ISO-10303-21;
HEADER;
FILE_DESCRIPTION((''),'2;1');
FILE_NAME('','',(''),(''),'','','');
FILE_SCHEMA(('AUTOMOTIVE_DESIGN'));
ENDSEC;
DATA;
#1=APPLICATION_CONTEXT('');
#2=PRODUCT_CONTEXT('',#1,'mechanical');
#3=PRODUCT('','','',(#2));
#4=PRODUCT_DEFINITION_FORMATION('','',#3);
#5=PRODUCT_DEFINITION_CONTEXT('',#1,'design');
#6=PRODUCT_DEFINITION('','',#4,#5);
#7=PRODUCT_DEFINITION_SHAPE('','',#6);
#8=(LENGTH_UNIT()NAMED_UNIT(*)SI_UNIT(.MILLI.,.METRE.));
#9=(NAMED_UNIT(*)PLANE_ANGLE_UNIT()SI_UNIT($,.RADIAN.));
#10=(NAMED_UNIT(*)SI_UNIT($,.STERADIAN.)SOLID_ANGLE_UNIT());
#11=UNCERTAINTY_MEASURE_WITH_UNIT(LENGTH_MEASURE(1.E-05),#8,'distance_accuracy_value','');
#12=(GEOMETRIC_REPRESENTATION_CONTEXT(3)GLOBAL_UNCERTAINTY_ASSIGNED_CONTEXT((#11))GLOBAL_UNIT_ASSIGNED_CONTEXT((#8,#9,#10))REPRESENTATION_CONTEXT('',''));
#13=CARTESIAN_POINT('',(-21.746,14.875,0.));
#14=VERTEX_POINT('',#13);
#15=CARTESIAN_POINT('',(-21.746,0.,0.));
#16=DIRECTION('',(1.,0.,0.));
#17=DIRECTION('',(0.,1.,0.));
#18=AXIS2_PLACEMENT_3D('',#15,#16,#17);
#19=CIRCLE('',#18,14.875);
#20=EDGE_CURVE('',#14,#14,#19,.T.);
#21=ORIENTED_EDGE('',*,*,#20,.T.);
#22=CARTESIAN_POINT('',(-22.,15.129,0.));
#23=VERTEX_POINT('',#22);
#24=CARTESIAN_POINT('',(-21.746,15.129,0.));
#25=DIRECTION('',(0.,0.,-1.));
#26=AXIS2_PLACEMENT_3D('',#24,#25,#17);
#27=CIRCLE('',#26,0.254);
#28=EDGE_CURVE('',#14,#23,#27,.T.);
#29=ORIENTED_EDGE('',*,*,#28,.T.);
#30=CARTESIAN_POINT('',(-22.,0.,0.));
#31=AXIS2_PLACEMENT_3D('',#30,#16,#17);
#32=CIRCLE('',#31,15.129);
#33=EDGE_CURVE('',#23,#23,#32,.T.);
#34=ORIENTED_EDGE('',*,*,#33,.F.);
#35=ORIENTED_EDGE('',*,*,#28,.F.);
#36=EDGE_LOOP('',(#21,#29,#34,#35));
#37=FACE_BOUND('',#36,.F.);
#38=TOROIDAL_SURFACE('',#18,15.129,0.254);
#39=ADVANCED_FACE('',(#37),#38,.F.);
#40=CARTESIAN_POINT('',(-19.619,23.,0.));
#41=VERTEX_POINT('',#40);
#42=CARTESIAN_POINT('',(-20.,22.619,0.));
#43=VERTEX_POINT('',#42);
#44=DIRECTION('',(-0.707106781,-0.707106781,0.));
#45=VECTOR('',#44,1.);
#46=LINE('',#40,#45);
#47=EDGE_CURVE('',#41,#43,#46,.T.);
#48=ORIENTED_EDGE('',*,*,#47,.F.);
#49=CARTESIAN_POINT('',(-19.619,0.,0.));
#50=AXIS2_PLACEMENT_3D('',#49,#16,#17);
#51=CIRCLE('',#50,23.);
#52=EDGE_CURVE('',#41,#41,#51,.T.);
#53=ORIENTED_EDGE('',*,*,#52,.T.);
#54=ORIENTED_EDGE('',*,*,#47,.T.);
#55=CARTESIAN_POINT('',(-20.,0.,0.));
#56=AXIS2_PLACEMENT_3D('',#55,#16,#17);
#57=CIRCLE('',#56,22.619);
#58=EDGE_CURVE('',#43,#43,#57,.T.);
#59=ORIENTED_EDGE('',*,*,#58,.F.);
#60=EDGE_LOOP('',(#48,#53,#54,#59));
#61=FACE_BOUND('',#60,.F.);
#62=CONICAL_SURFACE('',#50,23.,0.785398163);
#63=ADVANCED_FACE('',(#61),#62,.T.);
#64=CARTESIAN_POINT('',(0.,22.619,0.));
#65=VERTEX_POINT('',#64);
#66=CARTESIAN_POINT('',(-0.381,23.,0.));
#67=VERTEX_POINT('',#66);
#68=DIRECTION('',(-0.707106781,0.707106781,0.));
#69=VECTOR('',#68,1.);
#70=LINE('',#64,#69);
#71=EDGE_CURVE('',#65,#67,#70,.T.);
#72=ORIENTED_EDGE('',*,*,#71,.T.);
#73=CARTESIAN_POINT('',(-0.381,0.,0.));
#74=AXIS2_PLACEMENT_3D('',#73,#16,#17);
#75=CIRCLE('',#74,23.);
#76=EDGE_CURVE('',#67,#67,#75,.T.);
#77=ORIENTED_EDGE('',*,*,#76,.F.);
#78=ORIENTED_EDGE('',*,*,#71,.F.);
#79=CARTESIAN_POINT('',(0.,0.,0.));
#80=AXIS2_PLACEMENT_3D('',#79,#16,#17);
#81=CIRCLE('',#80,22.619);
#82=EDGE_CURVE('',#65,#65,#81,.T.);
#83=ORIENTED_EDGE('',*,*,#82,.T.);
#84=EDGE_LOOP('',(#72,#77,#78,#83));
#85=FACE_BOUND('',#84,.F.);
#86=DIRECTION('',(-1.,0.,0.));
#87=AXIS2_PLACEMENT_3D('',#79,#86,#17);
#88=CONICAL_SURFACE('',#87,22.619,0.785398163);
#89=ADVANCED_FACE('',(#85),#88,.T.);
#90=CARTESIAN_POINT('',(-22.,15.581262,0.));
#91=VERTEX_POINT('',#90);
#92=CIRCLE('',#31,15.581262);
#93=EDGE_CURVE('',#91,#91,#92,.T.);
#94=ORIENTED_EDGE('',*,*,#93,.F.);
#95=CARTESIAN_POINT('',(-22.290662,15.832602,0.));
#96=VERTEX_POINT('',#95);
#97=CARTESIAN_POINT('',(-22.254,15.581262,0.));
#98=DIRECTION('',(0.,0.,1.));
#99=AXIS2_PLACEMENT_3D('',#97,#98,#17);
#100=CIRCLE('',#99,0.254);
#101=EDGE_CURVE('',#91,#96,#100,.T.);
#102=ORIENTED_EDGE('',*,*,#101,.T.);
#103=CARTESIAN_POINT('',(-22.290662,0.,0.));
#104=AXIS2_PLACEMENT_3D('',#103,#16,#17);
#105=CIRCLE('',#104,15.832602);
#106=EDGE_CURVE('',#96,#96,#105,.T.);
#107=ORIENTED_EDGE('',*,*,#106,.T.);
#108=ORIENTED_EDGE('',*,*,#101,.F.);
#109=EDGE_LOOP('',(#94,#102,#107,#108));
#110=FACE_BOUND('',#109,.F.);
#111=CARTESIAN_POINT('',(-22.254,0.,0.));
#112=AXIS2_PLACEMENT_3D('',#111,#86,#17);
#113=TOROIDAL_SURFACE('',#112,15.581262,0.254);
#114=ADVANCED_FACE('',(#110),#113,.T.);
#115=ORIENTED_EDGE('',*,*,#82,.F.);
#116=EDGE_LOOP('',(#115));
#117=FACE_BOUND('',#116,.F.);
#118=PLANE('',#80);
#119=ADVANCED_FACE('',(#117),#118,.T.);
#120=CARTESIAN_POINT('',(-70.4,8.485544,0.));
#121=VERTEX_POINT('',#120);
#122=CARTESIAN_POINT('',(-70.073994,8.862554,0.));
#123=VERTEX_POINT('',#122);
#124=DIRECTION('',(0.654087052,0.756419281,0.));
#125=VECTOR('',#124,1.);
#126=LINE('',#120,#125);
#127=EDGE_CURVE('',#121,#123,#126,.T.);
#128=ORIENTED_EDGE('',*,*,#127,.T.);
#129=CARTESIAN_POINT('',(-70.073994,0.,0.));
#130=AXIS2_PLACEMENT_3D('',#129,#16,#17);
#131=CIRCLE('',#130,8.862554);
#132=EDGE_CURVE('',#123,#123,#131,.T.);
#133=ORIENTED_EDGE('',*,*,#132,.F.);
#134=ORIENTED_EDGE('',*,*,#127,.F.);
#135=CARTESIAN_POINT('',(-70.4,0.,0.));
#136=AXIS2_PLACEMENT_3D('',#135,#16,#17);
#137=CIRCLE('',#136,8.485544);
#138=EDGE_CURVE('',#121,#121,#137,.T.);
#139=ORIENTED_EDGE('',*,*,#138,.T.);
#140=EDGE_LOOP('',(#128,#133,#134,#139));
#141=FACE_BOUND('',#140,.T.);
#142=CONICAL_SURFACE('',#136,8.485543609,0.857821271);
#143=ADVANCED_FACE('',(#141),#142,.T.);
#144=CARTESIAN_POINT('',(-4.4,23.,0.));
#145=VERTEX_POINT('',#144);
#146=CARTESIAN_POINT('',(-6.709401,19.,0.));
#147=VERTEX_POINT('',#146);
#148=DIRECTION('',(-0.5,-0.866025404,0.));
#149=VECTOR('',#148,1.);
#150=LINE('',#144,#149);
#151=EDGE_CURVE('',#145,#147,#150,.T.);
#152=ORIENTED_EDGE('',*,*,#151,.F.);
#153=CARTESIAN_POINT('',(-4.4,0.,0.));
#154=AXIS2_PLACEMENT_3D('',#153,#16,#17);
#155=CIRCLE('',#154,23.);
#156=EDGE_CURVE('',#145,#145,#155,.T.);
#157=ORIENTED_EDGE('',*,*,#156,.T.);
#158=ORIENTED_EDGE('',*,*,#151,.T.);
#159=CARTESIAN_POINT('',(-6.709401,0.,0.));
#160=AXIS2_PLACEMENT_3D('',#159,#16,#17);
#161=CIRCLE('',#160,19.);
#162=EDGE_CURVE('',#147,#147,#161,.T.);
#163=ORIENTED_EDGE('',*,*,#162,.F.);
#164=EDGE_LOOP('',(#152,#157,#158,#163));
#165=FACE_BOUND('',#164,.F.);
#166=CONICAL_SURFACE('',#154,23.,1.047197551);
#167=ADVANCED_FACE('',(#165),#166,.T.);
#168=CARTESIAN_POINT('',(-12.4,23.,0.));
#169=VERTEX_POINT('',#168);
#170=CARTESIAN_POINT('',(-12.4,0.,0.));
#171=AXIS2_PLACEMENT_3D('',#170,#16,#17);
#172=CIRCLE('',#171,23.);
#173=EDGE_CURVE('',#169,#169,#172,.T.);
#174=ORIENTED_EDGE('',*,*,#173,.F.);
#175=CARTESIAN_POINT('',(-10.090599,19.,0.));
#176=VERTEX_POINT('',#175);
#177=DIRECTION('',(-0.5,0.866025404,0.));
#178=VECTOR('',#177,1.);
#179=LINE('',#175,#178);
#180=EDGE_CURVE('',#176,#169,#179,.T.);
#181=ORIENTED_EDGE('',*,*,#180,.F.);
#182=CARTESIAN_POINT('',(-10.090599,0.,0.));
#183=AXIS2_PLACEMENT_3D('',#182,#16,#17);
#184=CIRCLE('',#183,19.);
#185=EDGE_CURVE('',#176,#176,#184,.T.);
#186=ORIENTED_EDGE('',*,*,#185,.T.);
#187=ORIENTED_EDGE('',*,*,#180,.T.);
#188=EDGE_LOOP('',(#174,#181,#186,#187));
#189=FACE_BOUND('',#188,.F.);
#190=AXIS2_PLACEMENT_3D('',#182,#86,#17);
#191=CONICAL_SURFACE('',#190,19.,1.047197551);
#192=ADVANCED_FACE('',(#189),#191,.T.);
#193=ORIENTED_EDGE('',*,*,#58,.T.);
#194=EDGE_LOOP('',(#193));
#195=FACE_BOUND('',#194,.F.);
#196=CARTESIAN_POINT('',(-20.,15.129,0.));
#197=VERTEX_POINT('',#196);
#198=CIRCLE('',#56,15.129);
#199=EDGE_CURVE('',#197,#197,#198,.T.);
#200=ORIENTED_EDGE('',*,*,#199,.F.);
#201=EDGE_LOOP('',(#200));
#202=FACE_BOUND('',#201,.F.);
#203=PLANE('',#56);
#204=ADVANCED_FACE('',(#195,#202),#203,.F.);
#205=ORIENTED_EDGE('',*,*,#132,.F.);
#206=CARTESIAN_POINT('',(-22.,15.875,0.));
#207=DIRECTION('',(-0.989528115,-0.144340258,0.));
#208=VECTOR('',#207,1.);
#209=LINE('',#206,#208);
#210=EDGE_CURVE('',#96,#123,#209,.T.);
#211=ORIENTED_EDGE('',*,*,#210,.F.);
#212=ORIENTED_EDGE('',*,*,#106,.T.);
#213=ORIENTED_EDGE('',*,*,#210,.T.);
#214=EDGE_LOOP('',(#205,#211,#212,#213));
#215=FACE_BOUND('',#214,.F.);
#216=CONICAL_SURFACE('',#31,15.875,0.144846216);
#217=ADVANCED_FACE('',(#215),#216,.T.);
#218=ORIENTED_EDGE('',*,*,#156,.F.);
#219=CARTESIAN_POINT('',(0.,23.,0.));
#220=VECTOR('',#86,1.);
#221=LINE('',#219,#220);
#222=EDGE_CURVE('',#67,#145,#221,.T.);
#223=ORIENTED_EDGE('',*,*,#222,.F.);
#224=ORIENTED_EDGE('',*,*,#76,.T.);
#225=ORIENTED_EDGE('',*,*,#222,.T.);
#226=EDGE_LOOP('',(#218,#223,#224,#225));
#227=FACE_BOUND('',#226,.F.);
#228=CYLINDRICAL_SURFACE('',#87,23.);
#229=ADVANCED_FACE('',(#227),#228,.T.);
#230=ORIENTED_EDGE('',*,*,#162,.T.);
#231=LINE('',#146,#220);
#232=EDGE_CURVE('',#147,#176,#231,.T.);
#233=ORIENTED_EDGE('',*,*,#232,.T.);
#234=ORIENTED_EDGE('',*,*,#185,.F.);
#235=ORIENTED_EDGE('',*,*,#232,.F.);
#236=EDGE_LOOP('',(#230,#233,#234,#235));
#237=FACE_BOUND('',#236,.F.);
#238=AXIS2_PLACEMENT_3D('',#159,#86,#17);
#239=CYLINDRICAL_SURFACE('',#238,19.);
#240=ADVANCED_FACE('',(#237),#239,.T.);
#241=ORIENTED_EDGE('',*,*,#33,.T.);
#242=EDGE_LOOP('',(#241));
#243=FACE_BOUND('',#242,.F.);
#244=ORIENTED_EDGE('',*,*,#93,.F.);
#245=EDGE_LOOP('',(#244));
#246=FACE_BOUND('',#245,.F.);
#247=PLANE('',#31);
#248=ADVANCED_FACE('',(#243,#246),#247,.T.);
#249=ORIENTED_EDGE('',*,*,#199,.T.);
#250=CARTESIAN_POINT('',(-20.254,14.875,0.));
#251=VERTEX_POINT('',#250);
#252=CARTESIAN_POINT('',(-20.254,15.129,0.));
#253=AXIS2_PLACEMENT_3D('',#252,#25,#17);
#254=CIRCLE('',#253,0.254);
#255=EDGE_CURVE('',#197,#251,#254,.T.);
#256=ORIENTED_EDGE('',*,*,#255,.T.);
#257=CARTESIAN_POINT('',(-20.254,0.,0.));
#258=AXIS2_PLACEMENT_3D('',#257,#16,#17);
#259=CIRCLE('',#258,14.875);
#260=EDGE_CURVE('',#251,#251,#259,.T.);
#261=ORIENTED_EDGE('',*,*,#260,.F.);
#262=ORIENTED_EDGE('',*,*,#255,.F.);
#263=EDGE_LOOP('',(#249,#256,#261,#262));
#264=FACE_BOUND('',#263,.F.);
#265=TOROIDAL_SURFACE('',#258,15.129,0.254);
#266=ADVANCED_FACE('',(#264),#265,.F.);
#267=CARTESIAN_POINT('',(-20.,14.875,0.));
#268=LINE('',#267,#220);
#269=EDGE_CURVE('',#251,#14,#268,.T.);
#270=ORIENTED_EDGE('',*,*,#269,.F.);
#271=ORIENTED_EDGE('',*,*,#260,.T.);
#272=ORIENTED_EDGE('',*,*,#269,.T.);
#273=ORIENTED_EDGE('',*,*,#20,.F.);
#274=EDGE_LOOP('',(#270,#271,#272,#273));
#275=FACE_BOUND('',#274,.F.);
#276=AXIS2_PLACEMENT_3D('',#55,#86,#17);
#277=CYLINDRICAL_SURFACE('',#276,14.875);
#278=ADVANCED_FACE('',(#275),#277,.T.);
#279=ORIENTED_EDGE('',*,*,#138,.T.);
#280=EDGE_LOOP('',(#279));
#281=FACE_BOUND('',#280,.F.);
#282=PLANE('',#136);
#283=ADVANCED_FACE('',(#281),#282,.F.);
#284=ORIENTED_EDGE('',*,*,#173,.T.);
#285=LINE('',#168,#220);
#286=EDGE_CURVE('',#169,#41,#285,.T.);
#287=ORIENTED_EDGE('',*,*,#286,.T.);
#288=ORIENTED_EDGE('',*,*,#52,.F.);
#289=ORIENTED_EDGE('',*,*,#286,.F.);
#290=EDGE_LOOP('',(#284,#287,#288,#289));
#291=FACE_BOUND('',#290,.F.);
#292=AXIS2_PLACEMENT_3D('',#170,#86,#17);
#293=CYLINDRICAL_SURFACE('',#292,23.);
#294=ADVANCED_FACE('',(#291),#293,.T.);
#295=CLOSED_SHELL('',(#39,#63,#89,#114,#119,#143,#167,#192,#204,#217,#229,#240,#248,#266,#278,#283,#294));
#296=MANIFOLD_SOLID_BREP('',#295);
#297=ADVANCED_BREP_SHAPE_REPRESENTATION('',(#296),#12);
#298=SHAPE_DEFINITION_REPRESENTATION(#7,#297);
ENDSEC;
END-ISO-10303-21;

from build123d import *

# Parameters (mm, degrees)
F3_R = 0.254


# Not quite as in the source:
# - a fillet or chamfer that OpenCascade refuses, or shapes differently, is made with other operations: its cross-section is extruded or revolved along the edge and cut away or added


with BuildPart() as f1:
    # F0 (on Top) → F1 (revolve)
    with BuildSketch(Plane.XY):
        Polygon((-70.4, 0), (0, 0), (0, 23), (-4.4, 23), (-6.7094010768, 19), (-10.0905989232, 19), (-12.4, 23), (-20, 23), (-20, 14.875), (-22, 14.875), (-22, 15.875), (-70.4, 8.815), align=None)
    revolve(axis=Axis((-35.2, 0, 0), (1, 0, 0)))

    # F2: chamfer of 0.381 on 3 edges, made by hand

    # F2_s1 → F2_t2 (revolve, cut)
    with BuildSketch(Plane.XY):
        Polygon((0, 22.619), (-0.381, 23), (0, 23), align=None)
    revolve(axis=Axis((0, 0, 0), (1, 0, 0)), mode=Mode.SUBTRACT)

    # F2_s3 → F2_t4 (revolve, cut)
    with BuildSketch(Plane.XY):
        Polygon((-19.619, 23), (-20, 22.619), (-20, 23), align=None)
    revolve(axis=Axis((-20, 0, 0), (1, 0, 0)), mode=Mode.SUBTRACT)

    # F2_s5 → F2_t6 (revolve, cut)
    with BuildSketch(Plane.XY):
        Polygon((-70.4, 8.4855436088), (-70.0739936383, 8.8625538205), (-70.4, 8.815), align=None)
    revolve(axis=Axis((-70.4, 0, 0), (1, 0, 0)), mode=Mode.SUBTRACT)

    # F3
    f3_edges = [f1.edges().sort_by_distance(p)[0] for p in [
        (-22, -15.875, 0),
        (-22, -14.875, 0),
        (-20, -14.875, 0),
    ]]
    fillet(f3_edges, radius=F3_R)


solid = f1.part
